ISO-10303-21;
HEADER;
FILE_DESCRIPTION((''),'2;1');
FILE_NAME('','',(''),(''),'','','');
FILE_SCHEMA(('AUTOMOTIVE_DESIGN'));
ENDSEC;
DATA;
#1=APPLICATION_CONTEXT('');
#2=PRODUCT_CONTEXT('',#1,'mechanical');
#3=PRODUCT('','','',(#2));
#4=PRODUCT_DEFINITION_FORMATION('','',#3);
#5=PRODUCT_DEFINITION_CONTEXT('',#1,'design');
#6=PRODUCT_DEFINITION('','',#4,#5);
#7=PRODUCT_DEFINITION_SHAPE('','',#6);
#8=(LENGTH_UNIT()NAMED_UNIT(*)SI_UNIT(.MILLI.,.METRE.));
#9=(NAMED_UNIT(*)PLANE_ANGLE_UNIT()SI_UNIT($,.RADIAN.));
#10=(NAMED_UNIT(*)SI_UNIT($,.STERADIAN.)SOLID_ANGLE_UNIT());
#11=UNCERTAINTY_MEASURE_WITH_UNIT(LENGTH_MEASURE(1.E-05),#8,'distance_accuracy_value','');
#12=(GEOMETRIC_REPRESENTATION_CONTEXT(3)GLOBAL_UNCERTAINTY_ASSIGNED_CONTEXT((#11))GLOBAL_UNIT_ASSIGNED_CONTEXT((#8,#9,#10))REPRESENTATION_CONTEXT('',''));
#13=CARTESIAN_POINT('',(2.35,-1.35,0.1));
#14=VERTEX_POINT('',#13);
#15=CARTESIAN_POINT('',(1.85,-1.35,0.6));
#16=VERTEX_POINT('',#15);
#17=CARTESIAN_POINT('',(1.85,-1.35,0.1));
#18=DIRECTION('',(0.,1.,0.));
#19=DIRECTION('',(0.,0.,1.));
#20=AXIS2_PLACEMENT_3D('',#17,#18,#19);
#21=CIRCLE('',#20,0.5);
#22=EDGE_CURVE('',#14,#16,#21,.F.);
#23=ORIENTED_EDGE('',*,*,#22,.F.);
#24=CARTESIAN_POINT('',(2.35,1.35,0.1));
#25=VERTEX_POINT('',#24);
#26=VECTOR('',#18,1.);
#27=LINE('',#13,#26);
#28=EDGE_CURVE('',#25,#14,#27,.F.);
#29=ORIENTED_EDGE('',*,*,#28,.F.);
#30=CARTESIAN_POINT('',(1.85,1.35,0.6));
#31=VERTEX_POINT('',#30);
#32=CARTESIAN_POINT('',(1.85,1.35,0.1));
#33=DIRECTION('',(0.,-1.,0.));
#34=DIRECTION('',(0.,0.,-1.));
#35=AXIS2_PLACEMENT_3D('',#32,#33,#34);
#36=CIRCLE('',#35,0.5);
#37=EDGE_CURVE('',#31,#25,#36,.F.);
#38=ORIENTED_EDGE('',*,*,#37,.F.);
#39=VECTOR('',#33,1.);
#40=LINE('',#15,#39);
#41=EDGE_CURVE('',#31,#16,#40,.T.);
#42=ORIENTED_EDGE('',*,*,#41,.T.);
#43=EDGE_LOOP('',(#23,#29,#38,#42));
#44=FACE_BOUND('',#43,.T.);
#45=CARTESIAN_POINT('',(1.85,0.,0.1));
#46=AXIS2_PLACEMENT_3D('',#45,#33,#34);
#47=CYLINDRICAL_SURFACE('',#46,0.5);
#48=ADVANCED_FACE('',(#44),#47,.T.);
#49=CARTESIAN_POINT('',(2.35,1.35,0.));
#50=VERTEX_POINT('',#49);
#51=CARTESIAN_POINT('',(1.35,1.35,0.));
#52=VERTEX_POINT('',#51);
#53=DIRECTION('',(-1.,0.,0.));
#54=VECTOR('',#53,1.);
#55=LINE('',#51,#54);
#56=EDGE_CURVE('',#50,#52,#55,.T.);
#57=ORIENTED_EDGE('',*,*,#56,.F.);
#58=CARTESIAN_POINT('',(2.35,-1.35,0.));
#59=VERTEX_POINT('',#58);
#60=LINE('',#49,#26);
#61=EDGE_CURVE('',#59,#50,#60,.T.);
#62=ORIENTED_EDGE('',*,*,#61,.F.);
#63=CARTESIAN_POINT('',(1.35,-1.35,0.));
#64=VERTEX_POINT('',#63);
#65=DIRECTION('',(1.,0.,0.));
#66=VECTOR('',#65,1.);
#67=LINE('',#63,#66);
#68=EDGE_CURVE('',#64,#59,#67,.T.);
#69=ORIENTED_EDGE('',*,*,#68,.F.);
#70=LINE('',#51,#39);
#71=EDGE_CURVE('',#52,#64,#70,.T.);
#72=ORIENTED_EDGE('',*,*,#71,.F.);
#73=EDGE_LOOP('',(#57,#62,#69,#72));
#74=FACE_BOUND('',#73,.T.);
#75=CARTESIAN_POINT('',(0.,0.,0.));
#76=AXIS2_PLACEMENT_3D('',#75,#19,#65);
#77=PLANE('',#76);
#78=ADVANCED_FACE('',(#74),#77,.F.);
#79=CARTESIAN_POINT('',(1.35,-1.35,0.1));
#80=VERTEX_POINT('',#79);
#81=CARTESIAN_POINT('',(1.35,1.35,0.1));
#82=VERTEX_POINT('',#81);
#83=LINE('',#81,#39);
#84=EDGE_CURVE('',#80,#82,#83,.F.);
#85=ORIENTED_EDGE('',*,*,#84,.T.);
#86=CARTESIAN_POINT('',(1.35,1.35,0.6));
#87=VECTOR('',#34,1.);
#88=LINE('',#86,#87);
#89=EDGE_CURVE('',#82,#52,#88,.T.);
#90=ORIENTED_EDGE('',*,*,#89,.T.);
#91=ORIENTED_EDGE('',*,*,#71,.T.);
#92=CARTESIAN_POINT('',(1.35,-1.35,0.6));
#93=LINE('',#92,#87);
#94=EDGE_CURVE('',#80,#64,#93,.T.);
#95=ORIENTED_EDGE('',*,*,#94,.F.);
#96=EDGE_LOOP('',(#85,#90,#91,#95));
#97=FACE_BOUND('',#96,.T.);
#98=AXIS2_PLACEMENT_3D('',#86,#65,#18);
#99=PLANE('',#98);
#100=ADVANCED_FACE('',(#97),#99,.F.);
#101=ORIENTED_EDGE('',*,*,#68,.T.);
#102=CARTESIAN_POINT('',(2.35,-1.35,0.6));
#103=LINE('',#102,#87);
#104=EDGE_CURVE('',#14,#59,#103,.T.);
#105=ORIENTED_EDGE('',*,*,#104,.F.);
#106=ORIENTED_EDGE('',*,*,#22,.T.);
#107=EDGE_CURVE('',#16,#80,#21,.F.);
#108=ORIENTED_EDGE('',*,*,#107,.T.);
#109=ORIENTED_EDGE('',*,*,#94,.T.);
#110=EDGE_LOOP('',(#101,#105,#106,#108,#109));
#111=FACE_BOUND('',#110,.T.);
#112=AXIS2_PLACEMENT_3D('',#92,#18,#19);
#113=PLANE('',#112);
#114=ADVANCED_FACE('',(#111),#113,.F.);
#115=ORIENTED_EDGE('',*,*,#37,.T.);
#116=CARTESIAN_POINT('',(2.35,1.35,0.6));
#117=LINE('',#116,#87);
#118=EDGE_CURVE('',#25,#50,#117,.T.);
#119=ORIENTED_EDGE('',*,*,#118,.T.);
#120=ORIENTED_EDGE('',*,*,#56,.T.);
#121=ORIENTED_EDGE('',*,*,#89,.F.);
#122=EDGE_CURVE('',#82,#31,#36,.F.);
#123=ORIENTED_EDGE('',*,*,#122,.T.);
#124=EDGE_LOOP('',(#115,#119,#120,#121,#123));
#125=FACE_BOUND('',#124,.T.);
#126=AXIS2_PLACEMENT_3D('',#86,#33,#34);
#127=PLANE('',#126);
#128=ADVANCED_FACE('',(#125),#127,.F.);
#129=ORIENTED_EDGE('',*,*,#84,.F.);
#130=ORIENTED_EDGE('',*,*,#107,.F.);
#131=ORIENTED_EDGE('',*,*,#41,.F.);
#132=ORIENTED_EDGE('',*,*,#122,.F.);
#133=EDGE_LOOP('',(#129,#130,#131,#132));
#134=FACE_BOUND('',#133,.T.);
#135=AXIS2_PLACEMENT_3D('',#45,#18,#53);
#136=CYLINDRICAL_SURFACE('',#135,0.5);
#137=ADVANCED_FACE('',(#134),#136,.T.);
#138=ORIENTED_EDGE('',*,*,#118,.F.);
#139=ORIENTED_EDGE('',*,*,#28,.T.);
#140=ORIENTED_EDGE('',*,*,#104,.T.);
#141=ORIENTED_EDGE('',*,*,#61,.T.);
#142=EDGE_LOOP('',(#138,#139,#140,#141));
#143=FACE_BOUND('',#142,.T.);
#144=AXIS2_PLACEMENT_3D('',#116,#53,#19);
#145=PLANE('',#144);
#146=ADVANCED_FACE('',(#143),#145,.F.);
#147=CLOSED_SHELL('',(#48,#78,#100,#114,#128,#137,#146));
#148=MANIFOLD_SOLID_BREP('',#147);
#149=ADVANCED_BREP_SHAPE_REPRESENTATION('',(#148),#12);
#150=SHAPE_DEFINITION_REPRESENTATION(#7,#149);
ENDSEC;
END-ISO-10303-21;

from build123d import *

# Parameters (mm, degrees)
CROQUIS1_W              = 1
CROQUIS1_H              = 2.7
SALIENTE_EXTRUIR1_DEPTH = 0.6
REDONDEO1_R             = 0.5


with BuildPart() as part:
    # Croquis1 → Saliente-Extruir1 (new body)
    with BuildSketch(Plane.XY):
        with Locations((1.85, 0)):
            Rectangle(CROQUIS1_W, CROQUIS1_H)
    extrude(amount=SALIENTE_EXTRUIR1_DEPTH)

    # Redondeo1
    redondeo1_edges = [part.edges().sort_by_distance(p)[0] for p in [
        (2.35, 0, 0.6),
        (1.35, 0, 0.6),
    ]]
    fillet(redondeo1_edges, radius=REDONDEO1_R - 0.0001)  # a hair under: the kernel refuses the full size


solid = part.part
